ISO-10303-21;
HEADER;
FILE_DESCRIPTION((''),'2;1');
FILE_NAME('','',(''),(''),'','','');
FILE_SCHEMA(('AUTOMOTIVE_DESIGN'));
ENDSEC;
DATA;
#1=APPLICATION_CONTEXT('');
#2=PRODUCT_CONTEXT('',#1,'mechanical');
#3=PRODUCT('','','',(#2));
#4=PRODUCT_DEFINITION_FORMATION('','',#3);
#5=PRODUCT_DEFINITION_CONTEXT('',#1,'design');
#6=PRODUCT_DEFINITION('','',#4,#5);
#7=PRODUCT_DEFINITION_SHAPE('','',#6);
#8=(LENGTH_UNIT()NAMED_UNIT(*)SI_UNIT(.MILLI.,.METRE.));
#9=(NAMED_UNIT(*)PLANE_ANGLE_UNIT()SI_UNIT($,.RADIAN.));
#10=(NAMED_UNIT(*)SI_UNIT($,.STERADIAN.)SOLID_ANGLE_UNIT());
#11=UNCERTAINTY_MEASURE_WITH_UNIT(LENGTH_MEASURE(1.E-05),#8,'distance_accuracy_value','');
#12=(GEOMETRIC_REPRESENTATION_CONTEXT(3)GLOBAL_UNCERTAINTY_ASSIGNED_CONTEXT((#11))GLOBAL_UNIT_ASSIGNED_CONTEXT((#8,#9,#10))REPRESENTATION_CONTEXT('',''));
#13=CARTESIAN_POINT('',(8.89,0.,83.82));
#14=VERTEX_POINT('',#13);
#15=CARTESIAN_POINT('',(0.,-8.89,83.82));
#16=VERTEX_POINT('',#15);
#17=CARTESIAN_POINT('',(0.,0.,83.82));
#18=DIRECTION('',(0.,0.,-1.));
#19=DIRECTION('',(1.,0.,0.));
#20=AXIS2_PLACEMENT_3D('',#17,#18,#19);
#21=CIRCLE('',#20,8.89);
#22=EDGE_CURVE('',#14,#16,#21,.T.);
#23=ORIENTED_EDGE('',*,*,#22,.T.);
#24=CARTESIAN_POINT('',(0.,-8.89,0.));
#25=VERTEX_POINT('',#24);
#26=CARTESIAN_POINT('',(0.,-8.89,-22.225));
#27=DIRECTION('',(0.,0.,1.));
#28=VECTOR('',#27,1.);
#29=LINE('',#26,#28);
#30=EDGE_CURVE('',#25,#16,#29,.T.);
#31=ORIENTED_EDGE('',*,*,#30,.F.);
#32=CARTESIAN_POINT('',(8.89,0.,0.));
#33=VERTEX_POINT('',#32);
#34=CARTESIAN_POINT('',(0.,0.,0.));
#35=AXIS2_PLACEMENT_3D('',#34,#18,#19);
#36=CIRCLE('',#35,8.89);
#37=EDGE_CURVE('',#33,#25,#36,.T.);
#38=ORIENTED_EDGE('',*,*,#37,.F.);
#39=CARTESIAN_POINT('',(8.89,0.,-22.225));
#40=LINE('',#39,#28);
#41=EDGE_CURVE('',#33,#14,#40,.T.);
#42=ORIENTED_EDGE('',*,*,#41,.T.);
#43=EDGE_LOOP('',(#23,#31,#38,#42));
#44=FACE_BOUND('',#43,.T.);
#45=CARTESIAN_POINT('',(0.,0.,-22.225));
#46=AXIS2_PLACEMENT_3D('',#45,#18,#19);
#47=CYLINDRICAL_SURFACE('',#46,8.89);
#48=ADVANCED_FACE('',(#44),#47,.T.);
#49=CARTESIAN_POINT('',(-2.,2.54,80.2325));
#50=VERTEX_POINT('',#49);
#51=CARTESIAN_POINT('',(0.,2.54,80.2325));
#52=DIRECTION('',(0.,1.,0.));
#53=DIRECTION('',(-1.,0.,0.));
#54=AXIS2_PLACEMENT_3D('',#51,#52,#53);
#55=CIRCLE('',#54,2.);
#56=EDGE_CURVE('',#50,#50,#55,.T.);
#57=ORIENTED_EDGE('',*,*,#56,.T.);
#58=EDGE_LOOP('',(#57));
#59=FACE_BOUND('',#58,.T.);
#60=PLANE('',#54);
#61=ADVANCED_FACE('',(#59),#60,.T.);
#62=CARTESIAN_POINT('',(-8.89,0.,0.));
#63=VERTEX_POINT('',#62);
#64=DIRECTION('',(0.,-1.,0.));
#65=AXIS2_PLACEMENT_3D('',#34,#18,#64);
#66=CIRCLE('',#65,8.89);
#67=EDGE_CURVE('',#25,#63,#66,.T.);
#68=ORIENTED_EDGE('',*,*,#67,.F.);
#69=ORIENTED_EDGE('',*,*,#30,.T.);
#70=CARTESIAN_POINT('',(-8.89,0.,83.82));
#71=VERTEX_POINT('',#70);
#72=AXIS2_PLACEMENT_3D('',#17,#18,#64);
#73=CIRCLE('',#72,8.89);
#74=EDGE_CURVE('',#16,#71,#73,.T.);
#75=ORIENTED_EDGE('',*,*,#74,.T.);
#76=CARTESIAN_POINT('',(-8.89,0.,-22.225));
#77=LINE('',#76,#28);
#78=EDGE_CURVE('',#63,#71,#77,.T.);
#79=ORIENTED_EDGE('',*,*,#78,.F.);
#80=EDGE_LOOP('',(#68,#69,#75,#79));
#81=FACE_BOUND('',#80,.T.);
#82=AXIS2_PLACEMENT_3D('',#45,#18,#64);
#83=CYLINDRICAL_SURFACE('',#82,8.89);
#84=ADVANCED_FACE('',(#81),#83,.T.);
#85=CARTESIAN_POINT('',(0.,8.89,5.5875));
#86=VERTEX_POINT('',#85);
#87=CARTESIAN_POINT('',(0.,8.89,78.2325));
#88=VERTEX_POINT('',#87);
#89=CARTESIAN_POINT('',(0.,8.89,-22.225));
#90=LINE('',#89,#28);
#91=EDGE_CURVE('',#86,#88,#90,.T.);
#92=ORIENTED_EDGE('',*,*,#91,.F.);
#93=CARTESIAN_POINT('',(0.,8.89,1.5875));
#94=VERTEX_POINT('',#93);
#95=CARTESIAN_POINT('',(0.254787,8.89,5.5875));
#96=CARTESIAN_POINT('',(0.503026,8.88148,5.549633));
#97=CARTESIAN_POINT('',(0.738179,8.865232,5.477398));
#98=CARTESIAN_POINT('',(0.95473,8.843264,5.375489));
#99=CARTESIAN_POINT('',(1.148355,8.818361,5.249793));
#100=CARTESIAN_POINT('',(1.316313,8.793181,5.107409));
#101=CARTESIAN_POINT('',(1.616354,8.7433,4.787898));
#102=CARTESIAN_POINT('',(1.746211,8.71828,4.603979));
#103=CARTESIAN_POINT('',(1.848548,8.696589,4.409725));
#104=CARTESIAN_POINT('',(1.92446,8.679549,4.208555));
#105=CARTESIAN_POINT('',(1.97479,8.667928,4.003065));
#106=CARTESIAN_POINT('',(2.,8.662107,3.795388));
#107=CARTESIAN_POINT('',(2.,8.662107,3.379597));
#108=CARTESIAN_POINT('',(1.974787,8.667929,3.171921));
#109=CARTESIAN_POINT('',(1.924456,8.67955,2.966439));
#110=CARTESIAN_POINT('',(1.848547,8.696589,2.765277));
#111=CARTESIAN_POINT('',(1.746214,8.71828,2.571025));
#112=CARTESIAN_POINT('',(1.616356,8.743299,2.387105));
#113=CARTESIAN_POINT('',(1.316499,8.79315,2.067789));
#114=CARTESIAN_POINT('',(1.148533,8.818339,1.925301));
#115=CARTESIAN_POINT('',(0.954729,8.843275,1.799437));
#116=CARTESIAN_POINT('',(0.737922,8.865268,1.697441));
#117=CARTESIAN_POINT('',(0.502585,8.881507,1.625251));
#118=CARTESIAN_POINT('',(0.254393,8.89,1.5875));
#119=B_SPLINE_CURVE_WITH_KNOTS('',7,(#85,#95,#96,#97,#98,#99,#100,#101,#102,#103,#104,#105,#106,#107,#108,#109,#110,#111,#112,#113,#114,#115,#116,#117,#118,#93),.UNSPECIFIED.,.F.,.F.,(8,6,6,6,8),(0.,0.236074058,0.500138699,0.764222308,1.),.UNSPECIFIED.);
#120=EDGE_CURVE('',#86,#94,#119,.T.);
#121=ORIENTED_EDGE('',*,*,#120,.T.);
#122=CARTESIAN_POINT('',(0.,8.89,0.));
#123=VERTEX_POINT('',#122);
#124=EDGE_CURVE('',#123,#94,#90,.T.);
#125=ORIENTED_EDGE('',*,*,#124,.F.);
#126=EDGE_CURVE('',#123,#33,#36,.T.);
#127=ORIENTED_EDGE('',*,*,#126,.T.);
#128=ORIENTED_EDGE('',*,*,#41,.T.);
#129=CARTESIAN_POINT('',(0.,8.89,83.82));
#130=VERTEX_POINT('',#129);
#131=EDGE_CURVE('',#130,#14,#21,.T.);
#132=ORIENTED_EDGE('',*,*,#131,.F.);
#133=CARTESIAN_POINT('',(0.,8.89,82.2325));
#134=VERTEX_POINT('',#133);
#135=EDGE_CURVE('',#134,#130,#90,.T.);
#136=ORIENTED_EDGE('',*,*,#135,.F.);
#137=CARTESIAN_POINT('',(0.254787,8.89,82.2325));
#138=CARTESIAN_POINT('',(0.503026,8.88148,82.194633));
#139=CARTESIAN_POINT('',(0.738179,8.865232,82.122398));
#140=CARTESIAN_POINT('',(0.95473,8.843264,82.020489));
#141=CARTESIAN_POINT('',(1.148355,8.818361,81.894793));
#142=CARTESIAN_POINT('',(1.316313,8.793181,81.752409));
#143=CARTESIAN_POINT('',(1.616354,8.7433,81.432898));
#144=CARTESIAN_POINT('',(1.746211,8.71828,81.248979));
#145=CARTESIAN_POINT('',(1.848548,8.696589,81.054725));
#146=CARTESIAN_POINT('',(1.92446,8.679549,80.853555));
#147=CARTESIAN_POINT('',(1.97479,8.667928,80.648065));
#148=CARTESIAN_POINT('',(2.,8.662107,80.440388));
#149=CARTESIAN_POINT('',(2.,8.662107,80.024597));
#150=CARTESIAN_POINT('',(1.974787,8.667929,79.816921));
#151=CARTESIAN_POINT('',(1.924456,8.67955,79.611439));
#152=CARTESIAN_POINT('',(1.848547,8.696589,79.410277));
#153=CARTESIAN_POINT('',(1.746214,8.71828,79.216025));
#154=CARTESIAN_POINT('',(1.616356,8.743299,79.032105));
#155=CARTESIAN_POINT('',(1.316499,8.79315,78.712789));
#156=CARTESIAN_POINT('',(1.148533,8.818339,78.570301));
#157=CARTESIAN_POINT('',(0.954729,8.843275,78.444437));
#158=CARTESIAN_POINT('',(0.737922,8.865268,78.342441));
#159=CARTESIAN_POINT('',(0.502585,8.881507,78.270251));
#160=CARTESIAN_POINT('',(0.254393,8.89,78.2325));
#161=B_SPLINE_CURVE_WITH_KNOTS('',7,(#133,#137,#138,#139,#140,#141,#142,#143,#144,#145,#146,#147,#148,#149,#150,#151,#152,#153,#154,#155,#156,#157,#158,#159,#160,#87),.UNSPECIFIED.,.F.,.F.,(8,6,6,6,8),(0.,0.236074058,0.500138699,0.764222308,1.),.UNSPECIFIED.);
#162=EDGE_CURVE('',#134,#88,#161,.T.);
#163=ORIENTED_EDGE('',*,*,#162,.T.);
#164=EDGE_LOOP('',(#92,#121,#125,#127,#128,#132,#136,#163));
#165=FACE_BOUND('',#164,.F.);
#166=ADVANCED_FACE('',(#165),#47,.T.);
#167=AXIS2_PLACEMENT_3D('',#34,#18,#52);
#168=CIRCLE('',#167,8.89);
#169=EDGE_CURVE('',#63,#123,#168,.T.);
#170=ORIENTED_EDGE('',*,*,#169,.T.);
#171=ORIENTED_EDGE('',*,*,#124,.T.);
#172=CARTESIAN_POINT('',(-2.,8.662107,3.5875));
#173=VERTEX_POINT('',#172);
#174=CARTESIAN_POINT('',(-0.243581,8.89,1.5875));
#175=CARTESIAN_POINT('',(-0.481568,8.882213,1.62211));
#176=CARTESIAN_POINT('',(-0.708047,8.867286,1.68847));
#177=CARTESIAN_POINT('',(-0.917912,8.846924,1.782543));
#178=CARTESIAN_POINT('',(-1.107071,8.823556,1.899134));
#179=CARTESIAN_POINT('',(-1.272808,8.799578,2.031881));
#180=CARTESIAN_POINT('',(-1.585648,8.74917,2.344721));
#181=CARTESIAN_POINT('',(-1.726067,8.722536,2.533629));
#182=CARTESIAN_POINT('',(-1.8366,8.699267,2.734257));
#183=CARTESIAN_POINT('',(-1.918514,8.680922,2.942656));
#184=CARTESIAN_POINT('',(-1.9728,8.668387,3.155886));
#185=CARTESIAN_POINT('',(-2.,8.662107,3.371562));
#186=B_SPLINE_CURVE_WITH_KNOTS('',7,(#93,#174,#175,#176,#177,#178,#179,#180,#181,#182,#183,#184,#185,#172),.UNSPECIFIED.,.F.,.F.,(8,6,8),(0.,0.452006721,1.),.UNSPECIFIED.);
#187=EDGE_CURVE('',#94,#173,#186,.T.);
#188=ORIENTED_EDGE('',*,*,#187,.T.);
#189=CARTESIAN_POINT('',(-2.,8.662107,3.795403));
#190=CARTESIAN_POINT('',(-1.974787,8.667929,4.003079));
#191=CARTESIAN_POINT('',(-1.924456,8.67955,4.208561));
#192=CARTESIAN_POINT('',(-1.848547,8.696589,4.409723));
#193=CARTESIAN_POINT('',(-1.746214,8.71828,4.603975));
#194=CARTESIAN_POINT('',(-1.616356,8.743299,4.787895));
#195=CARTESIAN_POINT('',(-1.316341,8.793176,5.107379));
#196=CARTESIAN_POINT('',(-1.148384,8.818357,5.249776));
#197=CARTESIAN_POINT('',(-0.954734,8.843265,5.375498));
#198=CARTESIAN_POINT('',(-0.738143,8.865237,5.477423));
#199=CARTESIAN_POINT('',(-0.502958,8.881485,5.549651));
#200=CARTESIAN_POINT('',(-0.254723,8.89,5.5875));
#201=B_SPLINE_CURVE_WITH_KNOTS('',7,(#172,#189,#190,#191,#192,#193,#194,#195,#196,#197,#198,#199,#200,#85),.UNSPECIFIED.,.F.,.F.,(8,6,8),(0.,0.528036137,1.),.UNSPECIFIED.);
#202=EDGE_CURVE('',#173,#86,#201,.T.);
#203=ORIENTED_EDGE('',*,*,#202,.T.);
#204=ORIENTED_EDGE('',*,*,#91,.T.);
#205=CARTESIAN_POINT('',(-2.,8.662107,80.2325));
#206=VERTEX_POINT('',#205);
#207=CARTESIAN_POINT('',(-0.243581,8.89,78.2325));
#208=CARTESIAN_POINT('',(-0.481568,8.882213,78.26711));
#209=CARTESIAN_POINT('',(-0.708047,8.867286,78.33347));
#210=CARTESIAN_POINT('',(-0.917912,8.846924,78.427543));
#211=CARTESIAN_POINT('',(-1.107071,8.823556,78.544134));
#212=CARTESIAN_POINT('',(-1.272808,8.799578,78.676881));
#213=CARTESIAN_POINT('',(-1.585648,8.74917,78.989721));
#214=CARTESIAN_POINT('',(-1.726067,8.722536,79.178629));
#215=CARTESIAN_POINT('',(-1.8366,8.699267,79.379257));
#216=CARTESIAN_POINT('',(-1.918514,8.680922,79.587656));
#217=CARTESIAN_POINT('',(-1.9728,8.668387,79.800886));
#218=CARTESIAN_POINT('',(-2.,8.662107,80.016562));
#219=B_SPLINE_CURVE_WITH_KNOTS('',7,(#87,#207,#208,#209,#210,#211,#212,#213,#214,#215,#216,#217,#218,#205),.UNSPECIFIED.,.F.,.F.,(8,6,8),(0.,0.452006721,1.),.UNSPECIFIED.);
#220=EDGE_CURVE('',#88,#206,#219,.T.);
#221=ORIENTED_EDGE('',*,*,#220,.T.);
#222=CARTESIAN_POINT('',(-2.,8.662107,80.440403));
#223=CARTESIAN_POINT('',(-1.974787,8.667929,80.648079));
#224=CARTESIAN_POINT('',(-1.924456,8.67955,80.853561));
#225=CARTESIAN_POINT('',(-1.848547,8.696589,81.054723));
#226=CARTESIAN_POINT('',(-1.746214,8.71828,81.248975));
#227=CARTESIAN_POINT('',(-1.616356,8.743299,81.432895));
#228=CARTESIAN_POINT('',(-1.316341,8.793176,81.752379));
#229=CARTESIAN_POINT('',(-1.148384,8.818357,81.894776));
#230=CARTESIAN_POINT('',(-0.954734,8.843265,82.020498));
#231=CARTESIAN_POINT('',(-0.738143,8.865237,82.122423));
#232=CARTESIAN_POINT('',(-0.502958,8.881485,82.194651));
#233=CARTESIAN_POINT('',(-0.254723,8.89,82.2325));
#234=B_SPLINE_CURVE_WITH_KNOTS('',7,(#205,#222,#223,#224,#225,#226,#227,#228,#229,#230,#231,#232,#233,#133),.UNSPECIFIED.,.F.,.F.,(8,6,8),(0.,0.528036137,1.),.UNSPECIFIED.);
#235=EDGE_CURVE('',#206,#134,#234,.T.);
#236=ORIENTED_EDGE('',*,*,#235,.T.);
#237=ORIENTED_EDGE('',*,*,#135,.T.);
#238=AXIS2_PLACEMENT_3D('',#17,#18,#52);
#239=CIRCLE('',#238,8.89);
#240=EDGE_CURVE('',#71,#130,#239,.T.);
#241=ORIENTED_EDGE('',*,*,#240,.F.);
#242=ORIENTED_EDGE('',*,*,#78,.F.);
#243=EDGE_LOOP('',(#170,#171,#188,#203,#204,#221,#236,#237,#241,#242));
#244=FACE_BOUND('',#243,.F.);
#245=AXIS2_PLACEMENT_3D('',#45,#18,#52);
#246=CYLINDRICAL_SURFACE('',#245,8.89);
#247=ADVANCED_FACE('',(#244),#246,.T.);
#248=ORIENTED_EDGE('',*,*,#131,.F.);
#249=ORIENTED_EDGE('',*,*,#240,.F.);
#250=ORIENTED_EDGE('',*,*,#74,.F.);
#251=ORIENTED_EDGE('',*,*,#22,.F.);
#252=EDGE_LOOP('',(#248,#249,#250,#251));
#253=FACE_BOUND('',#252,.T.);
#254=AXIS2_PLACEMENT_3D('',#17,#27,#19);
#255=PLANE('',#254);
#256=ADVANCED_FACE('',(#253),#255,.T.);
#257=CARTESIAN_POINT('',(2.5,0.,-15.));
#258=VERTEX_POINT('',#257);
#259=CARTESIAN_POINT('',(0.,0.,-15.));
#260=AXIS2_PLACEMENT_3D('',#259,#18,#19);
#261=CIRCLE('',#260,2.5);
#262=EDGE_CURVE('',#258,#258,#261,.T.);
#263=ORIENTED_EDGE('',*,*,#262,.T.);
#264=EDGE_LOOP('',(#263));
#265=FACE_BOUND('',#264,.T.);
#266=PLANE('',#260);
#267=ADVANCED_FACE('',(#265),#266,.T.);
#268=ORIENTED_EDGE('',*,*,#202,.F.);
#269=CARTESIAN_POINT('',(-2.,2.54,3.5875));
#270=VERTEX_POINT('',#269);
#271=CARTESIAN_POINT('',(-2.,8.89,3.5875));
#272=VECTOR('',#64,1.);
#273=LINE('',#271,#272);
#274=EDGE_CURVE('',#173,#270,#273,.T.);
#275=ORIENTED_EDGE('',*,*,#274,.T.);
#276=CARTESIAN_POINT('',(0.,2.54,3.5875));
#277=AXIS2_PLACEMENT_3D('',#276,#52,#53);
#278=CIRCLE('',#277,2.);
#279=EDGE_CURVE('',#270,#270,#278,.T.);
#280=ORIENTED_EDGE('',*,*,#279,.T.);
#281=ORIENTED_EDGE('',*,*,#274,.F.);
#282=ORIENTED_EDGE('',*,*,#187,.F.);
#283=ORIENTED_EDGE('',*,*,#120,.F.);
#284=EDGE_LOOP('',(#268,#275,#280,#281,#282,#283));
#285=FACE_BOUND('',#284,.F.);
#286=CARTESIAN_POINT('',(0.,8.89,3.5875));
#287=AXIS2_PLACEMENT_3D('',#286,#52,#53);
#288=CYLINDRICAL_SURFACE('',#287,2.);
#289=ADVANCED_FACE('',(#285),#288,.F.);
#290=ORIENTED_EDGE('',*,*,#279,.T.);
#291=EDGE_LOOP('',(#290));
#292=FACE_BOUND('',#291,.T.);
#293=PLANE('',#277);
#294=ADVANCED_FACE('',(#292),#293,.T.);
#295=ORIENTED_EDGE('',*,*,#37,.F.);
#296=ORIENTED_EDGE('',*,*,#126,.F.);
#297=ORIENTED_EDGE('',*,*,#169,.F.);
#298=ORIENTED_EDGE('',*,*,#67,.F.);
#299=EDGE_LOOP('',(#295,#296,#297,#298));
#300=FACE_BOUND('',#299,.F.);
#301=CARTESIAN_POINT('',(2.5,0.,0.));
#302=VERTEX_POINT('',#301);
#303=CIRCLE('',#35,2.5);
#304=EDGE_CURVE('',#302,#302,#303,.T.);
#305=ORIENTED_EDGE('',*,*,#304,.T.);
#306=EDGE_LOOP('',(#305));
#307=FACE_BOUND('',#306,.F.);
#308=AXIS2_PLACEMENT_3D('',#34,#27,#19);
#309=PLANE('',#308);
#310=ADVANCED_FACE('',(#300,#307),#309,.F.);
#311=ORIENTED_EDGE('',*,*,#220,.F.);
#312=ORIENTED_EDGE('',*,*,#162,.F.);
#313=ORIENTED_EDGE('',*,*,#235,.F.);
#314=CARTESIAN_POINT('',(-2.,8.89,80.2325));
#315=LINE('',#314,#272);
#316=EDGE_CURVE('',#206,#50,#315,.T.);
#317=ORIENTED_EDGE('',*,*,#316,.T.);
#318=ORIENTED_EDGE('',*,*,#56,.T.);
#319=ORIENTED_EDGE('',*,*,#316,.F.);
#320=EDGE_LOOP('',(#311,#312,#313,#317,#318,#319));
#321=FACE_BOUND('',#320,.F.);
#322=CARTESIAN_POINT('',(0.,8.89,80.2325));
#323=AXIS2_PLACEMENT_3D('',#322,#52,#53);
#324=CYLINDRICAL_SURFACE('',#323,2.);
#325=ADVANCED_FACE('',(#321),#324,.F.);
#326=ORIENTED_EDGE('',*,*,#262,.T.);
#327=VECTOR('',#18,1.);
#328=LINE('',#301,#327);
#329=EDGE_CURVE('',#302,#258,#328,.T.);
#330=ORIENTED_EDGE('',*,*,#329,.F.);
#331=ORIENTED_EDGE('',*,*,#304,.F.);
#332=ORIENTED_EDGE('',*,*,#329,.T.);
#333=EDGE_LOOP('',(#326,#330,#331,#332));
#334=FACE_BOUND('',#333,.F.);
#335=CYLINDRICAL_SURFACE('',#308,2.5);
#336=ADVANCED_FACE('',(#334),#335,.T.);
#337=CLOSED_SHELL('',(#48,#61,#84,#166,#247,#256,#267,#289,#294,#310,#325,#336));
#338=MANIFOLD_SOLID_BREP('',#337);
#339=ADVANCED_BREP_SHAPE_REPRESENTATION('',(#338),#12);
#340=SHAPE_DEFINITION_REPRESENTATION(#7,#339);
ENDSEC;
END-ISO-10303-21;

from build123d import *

# Parameters (mm, degrees)
F0_W        = 17.78
F0_H        = 17.78
F1_DEPTH    = 83.82
F2_R        = 2.5
F3_DEPTH    = 15
F4_R        = 2
F5_DEPTH    = 6.35
F6_T1_DEPTH = 128.27


# Not quite as in the source:
# - a fillet or chamfer that OpenCascade refuses, or shapes differently, is made with other operations: its cross-section is extruded or revolved along the edge and cut away or added


with BuildPart() as f1:
    # F0 (on Top) → F1 (new body)
    with BuildSketch(Plane.XY):
        Rectangle(F0_W, F0_H)
    extrude(amount=F1_DEPTH)

    # F2 (on face) → F3 (join)
    with BuildSketch(Plane(origin=(0, 0, 0), x_dir=(1, 0, 0), z_dir=(0, 0, -1))):
        Circle(F2_R)
    extrude(amount=F3_DEPTH)

    # F4 (on face) → F5 (cut)
    with BuildSketch(Plane(origin=(0, 8.89, 0), x_dir=(-1, 0, 0), z_dir=(0, 1, 0))):
        with Locations((0, 3.5875)):
            Circle(F4_R)
        with Locations((0, 80.2325)):
            Circle(F4_R)
    extrude(amount=-F5_DEPTH, mode=Mode.SUBTRACT)

    # F6: fillet of radius 8.89 on 4 edges, made by hand

    # F6_s2 → F6_t1 (cut)
    with BuildSketch(Plane.XY.offset(-22.225)):
        with BuildLine():
            ThreePointArc((8.89, 0), (6.2861792847, -6.2861792847), (0, -8.89))
            Line((0, -8.89), (8.89, -8.89))
            Line((8.89, -8.89), (8.89, 0))
        make_face()
        with BuildLine():
            ThreePointArc((8.89, 0), (6.2861792847, 6.2861792847), (0, 8.89))
            Line((0, 8.89), (8.89, 8.89))
            Line((8.89, 8.89), (8.89, 0))
        make_face()
        with BuildLine():
            ThreePointArc((0, 8.89), (-6.2861792847, 6.2861792847), (-8.89, 0))
            Line((-8.89, 0), (-8.89, 8.89))
            Line((-8.89, 8.89), (0, 8.89))
        make_face()
        with BuildLine():
            ThreePointArc((0, -8.89), (-6.2861792847, -6.2861792847), (-8.89, 0))
            Line((-8.89, 0), (-8.89, -8.89))
            Line((-8.89, -8.89), (0, -8.89))
        make_face()
    extrude(amount=F6_T1_DEPTH, mode=Mode.SUBTRACT)


solid = f1.part
